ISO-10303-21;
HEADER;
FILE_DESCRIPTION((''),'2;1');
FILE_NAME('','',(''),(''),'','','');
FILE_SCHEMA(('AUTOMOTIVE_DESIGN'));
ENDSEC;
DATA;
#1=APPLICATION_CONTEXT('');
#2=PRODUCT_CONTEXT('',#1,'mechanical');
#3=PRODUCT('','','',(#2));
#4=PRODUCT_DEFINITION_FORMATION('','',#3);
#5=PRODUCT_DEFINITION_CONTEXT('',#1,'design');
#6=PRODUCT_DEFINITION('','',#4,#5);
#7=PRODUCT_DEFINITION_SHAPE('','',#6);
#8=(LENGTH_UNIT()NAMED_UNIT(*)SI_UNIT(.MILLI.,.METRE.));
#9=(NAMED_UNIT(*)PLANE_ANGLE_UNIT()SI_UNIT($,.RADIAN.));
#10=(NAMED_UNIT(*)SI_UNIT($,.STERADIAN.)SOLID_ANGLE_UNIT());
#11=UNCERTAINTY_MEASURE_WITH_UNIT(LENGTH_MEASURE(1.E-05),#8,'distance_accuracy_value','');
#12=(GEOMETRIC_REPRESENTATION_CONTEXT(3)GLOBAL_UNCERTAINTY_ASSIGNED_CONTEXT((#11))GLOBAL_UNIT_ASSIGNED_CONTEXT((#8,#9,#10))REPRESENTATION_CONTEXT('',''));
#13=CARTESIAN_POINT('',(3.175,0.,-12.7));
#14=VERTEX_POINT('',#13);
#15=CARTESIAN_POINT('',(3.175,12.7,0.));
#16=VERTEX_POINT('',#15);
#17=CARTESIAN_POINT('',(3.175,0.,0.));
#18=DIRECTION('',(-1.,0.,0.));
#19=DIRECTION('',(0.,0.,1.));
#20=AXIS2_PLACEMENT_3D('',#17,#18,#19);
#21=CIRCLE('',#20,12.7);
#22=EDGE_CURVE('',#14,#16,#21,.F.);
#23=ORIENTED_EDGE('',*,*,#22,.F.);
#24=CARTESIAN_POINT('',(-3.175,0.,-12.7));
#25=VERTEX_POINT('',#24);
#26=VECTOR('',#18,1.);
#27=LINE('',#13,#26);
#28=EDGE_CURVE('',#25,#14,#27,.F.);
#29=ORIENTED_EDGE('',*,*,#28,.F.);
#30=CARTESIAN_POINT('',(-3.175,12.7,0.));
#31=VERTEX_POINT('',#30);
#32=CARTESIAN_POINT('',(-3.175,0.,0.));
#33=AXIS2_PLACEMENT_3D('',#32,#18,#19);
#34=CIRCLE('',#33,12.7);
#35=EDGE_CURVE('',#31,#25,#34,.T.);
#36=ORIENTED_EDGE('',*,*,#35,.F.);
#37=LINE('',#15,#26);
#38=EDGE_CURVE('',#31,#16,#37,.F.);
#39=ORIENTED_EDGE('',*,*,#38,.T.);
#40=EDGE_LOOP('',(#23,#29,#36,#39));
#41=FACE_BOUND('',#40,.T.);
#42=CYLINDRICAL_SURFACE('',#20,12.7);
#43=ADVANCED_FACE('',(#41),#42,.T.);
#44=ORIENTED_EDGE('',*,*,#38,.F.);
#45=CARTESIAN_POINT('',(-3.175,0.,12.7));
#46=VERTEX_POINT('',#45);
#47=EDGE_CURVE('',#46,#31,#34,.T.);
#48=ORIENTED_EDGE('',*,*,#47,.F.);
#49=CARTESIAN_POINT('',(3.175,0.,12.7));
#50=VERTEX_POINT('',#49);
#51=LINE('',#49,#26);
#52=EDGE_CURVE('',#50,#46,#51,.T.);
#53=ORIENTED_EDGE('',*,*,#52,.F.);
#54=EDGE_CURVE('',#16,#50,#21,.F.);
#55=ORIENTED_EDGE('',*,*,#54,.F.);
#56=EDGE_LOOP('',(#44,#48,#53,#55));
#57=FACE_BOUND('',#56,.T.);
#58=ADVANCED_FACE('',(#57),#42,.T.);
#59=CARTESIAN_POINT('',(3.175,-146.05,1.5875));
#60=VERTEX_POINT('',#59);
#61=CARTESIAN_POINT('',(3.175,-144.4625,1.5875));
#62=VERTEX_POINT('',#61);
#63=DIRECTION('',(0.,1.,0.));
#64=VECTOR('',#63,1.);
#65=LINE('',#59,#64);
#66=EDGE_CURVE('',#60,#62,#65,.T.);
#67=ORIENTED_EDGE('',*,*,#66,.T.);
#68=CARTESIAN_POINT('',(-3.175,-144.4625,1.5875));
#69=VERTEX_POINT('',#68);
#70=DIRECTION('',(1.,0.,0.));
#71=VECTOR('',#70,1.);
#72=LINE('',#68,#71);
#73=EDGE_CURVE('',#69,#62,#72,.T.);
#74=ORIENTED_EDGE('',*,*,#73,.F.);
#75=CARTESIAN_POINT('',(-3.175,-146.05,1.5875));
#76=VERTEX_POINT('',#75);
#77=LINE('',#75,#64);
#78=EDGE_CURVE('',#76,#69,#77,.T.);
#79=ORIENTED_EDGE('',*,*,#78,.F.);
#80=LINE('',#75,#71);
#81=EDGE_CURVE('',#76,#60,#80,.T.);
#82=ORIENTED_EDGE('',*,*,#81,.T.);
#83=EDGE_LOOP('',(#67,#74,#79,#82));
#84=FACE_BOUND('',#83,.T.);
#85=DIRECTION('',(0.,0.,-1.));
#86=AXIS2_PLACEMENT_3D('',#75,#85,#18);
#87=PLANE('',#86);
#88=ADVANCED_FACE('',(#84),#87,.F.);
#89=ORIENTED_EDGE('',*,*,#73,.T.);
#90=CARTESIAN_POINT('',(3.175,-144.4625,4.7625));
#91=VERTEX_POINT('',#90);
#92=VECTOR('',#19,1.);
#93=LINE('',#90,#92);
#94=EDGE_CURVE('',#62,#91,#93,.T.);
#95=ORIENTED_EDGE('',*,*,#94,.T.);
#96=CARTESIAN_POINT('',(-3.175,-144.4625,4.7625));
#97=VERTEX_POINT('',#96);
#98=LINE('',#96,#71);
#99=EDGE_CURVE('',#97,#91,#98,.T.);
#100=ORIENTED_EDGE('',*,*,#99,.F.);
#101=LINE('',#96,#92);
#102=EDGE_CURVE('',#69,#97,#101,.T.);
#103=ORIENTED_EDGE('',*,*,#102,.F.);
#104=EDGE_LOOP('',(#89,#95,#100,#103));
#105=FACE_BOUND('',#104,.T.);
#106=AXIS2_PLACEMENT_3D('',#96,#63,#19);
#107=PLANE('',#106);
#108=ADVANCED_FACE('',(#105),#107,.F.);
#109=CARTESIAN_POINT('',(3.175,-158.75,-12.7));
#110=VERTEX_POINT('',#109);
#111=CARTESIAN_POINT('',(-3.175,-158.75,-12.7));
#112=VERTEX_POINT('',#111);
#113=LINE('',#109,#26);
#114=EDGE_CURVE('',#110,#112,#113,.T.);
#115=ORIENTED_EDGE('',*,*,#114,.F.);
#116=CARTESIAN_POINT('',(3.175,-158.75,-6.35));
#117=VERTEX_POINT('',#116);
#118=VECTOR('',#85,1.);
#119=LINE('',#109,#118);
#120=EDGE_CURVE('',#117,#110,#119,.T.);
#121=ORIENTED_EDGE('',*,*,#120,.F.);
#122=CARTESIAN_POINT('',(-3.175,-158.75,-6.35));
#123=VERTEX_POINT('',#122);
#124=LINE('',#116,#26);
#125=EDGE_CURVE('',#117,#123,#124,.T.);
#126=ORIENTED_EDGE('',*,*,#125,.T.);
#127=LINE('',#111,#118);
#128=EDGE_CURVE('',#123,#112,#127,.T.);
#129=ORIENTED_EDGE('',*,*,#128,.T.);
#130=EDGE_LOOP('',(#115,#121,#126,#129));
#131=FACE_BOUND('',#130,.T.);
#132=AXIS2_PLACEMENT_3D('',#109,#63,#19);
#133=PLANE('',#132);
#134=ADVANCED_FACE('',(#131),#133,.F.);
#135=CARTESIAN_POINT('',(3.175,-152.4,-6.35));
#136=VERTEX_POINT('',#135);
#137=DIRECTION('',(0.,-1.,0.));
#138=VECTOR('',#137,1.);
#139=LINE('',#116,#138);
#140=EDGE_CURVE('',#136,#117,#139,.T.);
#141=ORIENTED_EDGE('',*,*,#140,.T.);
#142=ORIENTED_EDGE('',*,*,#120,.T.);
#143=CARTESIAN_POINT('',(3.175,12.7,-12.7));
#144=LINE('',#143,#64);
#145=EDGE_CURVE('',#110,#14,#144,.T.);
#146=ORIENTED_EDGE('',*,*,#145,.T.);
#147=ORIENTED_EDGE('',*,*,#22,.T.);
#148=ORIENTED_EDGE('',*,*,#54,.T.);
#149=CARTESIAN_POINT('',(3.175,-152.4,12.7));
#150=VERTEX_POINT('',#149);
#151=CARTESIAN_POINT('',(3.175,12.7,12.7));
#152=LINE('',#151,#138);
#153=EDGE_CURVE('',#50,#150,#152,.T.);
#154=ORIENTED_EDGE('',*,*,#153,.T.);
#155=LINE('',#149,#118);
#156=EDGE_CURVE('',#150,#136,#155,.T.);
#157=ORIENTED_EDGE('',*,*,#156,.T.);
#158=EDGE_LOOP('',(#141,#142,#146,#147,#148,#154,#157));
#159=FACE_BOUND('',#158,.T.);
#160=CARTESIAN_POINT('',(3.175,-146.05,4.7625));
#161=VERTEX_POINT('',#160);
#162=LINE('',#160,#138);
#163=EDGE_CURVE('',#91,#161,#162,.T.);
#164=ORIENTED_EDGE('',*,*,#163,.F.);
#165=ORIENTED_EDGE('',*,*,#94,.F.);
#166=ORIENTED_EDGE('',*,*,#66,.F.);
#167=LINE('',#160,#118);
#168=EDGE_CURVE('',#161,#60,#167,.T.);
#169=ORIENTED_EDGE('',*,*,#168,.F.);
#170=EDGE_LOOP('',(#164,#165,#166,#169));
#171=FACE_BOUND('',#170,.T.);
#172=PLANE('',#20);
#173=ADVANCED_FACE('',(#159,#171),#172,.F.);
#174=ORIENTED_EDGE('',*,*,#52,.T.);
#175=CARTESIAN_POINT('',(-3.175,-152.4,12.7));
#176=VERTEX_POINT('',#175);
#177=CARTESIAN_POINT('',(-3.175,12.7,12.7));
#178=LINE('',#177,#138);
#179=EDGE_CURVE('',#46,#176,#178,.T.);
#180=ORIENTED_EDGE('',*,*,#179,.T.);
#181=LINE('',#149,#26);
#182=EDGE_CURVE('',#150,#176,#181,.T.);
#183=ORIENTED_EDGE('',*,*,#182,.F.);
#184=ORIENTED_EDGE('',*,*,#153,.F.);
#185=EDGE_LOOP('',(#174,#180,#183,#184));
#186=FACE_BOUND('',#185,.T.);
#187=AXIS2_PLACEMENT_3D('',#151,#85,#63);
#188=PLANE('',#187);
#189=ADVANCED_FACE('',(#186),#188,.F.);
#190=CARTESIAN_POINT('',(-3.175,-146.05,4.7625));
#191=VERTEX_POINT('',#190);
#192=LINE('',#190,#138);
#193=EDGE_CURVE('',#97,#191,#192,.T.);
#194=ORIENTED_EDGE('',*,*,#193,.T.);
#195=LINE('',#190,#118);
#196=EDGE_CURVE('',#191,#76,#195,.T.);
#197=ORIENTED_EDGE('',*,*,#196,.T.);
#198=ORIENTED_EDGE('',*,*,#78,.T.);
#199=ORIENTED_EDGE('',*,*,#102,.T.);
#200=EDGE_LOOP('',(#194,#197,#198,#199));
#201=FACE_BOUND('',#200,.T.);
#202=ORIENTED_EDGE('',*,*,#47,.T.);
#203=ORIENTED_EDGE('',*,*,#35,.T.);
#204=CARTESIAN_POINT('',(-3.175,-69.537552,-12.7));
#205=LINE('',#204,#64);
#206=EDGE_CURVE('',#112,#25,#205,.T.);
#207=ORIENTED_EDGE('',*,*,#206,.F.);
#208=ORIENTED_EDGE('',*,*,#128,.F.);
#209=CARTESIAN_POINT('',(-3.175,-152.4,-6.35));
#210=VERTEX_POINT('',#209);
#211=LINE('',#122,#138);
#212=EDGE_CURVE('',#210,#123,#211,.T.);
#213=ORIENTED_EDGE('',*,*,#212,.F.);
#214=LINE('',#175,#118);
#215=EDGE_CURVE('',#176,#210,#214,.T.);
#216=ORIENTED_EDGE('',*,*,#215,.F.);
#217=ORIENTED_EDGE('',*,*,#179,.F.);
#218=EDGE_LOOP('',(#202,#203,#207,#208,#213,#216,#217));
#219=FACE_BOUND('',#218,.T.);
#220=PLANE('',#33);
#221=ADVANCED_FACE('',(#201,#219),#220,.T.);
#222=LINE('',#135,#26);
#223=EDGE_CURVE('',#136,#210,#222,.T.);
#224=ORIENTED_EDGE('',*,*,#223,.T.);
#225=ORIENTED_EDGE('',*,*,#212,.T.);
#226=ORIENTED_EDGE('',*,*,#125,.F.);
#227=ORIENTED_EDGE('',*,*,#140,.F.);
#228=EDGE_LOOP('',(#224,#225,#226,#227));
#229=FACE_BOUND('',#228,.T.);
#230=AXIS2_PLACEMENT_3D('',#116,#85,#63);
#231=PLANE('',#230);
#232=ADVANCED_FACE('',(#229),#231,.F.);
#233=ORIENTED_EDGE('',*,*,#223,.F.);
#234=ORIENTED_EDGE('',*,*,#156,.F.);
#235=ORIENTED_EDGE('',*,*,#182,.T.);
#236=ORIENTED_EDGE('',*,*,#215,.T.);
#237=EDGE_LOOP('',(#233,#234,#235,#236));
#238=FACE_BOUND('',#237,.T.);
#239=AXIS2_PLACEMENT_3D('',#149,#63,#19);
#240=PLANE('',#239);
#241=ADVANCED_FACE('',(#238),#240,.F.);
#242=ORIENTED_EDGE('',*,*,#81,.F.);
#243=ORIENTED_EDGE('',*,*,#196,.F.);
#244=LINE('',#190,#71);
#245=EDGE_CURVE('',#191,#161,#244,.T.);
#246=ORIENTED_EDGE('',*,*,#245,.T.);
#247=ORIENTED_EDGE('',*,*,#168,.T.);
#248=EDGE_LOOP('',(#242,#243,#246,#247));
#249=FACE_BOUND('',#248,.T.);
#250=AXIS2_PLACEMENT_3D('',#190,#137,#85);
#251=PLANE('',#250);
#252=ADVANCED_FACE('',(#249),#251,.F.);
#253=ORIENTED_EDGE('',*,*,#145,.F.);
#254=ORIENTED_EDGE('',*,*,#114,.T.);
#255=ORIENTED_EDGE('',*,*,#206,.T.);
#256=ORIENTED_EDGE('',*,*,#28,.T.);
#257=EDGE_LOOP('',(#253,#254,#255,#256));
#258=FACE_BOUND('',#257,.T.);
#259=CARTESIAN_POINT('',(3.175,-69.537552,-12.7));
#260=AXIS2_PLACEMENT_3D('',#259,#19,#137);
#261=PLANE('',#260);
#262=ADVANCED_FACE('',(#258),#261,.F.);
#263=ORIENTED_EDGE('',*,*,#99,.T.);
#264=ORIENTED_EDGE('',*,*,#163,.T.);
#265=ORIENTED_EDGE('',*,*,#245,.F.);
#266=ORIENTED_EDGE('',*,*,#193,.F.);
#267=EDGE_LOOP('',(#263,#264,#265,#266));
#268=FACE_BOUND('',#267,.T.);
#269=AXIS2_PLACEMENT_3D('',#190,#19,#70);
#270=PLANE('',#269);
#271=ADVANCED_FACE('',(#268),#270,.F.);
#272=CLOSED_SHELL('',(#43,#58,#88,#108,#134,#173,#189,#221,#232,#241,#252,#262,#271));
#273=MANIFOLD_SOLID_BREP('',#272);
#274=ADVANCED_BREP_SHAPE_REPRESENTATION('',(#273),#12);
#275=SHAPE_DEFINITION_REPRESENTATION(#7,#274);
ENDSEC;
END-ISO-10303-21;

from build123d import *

# Parameters (mm, degrees)
BOSS_EXTRUDE1_DEPTH  = 3.175
FILLET1_R            = 12.7
SKETCH2_W            = 3.175
SKETCH2_H            = 1.5875
CABLE_TIE_HOLE_DEPTH = 160.383735055


with BuildPart() as part:
    # Sketch1 → Boss-Extrude1 (new, symmetric)
    with BuildSketch(Plane(origin=(0, 0, 0), x_dir=(0, 0, -1), z_dir=(1, 0, 0))):
        Polygon((12.7, -69.53755182), (12.7, -158.75), (6.35, -158.75), (6.35, -152.4), (-12.7, -152.4), (-12.7, 12.7), (12.7, 12.7), align=None)
    extrude(amount=BOSS_EXTRUDE1_DEPTH, both=True)

    # Fillet1
    fillet1_edges = [part.edges().sort_by_distance(p)[0] for p in [
        (0, 12.7, -12.7),
        (0, 12.7, 12.7),
    ]]
    fillet(fillet1_edges, radius=FILLET1_R - 0.0001)  # a hair under: the kernel refuses the full size

    # Sketch2 → Cable-tie hole (cut, through all)
    with BuildSketch(Plane(origin=(3.175, 0, 0), x_dir=(0, 0, -1), z_dir=(1, 0, 0))):
        with Locations((-3.175, -145.25625)):
            Rectangle(SKETCH2_W, SKETCH2_H)
    extrude(amount=-CABLE_TIE_HOLE_DEPTH, mode=Mode.SUBTRACT)


solid = part.part
